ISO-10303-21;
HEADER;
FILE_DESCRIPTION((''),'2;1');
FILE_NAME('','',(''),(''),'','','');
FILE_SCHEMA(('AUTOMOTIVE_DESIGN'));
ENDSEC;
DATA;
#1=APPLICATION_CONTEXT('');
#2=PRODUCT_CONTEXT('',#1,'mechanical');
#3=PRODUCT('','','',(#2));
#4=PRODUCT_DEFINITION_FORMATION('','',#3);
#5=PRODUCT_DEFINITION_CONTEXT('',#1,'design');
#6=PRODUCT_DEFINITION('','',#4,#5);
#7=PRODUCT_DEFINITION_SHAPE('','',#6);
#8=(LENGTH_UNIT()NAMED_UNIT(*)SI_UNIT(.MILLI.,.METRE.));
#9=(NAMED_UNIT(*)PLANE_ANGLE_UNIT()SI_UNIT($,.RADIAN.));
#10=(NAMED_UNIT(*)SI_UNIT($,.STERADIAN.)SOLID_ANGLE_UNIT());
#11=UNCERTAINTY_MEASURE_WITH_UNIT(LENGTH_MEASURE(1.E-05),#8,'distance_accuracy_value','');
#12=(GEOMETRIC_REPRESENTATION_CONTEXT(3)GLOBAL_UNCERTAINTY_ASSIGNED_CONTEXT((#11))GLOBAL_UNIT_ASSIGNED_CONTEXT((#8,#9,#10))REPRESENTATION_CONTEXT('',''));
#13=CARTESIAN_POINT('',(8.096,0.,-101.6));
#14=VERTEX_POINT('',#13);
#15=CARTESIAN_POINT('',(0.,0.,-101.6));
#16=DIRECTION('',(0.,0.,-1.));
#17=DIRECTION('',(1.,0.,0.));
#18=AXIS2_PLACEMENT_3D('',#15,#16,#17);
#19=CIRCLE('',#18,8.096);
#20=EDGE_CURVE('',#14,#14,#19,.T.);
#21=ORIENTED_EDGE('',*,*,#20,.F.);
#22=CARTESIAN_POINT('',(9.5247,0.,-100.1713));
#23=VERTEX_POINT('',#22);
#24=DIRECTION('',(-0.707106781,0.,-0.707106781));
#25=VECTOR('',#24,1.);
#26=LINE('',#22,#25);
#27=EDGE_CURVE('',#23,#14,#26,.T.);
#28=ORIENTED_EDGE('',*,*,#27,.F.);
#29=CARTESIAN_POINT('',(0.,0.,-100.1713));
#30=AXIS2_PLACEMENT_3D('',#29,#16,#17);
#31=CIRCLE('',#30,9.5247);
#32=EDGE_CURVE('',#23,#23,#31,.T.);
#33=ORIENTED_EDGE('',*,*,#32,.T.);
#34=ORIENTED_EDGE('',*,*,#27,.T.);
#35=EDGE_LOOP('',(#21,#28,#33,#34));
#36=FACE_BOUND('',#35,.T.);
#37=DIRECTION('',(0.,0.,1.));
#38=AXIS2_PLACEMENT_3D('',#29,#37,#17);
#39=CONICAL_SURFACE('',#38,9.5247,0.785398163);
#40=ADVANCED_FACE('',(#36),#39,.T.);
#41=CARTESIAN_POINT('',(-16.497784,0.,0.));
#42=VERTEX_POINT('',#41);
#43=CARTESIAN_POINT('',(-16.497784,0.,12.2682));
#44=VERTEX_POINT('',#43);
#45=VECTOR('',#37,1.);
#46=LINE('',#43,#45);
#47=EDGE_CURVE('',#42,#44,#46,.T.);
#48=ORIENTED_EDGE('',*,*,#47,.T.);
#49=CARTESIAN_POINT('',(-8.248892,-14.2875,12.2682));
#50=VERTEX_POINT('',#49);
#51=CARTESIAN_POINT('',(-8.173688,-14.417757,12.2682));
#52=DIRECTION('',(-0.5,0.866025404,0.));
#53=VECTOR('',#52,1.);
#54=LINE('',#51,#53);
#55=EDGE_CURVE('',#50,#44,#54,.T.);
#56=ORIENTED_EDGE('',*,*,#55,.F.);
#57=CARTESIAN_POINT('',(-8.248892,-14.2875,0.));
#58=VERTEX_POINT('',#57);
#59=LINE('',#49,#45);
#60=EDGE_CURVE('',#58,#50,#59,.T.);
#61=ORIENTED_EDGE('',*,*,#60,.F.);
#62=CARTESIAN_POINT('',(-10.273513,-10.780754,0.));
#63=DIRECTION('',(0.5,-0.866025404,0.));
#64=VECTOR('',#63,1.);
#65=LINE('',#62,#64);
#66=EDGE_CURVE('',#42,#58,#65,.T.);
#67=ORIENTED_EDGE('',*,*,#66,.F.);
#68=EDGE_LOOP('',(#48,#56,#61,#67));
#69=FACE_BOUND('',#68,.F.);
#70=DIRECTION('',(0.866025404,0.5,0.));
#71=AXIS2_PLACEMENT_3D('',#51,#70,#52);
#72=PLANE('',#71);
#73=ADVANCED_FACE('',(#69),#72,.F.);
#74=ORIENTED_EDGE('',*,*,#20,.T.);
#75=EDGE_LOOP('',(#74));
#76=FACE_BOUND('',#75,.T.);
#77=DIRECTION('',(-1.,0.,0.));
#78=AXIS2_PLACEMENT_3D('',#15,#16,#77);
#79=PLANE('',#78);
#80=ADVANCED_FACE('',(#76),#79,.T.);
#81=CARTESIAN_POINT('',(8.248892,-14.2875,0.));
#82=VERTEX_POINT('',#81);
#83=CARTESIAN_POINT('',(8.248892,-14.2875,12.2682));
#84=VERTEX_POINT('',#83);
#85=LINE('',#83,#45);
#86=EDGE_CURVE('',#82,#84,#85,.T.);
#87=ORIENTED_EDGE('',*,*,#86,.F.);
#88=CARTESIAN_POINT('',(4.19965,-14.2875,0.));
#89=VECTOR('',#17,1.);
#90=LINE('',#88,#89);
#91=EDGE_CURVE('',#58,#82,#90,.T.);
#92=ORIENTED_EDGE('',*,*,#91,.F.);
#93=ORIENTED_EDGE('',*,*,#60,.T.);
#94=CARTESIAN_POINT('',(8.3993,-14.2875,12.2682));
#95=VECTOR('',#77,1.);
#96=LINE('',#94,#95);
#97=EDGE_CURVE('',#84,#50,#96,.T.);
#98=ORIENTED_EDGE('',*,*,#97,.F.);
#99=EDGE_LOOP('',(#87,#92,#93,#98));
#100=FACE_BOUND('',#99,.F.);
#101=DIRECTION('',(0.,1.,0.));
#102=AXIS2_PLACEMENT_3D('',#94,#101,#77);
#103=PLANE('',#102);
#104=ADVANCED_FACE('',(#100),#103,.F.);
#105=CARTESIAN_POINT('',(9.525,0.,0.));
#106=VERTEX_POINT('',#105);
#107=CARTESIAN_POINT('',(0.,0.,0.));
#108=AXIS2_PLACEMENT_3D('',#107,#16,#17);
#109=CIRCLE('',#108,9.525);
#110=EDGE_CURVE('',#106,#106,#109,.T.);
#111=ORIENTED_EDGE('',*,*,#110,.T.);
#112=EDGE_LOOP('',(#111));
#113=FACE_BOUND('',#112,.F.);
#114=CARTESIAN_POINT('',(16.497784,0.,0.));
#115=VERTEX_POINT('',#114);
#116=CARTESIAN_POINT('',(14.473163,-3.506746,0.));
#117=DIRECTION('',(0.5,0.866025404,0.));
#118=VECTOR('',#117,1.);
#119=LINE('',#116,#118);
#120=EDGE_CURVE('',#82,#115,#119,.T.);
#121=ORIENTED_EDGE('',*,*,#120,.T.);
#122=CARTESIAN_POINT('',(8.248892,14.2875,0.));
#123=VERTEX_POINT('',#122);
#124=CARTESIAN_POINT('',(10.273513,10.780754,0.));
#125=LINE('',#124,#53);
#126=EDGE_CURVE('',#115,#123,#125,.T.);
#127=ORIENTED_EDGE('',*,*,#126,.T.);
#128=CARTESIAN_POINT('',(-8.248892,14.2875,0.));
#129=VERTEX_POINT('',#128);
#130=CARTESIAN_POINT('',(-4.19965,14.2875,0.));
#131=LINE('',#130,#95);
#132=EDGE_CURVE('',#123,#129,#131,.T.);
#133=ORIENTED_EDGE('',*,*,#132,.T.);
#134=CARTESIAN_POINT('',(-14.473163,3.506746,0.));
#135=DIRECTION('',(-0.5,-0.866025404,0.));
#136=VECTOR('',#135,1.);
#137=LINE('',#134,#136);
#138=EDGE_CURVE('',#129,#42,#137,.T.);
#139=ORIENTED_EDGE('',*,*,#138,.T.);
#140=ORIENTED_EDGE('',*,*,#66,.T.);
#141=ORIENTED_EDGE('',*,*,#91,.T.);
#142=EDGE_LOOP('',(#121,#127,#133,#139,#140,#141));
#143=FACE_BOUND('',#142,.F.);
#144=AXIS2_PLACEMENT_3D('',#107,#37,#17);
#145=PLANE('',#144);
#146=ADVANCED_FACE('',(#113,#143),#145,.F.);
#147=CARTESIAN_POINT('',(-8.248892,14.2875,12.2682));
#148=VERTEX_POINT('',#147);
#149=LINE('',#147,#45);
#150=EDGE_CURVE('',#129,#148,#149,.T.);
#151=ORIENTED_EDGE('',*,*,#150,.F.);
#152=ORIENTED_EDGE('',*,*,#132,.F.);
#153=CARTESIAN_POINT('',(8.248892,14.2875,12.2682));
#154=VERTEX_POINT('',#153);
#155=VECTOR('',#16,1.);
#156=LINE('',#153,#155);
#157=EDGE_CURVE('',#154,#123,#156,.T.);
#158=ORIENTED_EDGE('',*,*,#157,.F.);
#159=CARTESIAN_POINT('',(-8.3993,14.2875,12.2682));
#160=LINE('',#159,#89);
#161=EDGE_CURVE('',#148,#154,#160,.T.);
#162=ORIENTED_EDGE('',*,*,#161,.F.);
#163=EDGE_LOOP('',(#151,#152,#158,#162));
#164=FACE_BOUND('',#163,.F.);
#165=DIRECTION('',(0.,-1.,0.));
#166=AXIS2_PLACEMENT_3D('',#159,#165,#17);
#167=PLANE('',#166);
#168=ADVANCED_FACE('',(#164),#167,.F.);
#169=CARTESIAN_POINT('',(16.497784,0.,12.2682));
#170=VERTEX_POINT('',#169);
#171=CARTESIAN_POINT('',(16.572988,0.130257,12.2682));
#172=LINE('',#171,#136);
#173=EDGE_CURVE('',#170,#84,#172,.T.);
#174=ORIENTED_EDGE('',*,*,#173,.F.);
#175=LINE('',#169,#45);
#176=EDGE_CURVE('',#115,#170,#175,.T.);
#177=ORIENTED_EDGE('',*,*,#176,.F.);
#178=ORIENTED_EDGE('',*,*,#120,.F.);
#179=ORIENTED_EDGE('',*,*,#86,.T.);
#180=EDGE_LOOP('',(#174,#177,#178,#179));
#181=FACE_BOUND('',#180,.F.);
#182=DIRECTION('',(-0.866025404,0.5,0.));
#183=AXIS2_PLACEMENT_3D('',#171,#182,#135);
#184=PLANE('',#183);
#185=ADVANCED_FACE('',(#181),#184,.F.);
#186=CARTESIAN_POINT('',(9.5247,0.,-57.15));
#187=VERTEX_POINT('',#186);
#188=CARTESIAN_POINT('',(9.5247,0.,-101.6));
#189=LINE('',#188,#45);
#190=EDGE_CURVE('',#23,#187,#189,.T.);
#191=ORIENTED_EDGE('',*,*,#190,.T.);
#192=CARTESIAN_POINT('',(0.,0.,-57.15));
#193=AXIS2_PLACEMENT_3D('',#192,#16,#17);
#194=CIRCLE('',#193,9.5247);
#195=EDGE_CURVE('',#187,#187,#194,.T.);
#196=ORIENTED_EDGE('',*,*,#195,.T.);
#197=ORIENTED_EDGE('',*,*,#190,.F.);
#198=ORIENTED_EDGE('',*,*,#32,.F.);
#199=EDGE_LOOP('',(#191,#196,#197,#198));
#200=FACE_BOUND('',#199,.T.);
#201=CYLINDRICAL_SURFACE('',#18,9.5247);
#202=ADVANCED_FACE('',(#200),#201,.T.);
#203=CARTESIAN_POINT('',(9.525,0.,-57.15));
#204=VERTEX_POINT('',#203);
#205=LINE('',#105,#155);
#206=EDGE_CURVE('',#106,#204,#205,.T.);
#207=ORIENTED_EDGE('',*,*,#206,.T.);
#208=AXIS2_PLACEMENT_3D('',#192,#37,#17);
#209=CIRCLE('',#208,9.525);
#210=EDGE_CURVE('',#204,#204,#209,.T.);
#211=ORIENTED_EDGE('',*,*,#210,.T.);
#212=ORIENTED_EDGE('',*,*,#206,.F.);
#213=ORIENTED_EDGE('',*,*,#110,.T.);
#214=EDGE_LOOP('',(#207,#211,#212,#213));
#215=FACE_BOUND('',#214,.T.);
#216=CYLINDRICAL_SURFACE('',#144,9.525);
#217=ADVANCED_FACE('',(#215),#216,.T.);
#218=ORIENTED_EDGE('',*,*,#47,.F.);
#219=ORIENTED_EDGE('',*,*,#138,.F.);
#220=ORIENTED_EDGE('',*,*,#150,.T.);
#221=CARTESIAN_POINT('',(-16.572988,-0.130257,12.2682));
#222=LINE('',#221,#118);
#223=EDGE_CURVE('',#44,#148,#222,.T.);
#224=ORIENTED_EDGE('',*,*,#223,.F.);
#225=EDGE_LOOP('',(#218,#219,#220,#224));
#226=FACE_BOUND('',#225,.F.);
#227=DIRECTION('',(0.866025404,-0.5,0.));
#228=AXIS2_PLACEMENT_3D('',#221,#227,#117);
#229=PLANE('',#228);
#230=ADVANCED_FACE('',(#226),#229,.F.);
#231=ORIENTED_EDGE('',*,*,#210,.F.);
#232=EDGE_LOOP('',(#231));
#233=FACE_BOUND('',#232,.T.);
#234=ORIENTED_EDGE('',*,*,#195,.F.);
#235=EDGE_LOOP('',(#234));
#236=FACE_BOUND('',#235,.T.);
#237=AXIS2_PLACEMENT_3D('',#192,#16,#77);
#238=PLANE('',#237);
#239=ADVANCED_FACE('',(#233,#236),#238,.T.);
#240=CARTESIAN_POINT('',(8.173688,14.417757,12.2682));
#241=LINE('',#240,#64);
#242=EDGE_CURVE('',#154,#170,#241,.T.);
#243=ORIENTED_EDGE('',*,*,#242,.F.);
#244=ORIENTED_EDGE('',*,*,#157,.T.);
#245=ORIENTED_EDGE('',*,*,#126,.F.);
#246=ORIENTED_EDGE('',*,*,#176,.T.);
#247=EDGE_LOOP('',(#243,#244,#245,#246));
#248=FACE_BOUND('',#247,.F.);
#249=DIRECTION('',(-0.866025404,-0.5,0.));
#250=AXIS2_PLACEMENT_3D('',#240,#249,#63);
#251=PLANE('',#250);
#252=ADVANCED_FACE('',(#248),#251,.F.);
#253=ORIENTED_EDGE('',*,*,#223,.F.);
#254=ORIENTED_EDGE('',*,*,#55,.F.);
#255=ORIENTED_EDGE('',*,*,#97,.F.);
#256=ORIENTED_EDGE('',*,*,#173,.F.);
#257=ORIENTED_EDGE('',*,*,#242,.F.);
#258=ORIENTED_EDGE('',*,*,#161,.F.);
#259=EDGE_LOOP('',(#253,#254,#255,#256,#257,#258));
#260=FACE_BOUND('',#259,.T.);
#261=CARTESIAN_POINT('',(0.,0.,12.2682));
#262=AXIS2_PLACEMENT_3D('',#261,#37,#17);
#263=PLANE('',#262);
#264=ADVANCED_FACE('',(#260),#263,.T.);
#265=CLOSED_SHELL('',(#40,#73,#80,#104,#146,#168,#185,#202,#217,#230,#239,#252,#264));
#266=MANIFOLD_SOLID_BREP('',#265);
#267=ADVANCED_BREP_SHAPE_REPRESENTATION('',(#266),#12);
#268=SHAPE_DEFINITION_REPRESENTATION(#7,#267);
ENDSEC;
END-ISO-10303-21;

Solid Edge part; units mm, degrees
sketch "Sketch1" plane through (0, 0, 0) normal (0, 0, 1) x (1, 0, 0)
  circle A0 centre (0, 0) radius 16.5735
  dimension "D1" = 33.147
extrude "Protrusion1" add sketch "Sketch1" along normal blind 12.2682
sketch "Sketch2" plane through (0, 0, 0) normal (0, 0, -1) x (1, 0, 0)
  circle A0 centre (0, 0) radius 9.525
extrude "Protrusion2" add sketch "Sketch2" along normal blind 101.6
sketch "Sketch3" plane through (0, 0, -101.6) normal (0, 0, -1) x (1, 0, 0)
  circle A0 centre (0, 0) radius 9.5247
extrude "Cutout1" cut sketch "Sketch3" against normal blind 44.45 flip side to cut
chamfer "Chamfer_1" distance 1.4287 angle 45 1 edges at (-9.5247, 0, -101.6)
sketch "Sketch4" plane through (0, 0, 12.2682) normal (0, 0, 1) x (1, 0, 0)
  line L0 (-8.3993, 14.2875) -> (8.3993, 14.2875)
  dimension "D1" = 28.575
extrude "Cutout2" cut sketch "Sketch4" against normal up to next material side at (0, 14.3375, 12.2682)
pattern_circular "Pattern1" count 6 over 360 about axis through (0, 0, 12.2682) along (0, 0, 1) of "Cutout2"
properties part number "24105321"
